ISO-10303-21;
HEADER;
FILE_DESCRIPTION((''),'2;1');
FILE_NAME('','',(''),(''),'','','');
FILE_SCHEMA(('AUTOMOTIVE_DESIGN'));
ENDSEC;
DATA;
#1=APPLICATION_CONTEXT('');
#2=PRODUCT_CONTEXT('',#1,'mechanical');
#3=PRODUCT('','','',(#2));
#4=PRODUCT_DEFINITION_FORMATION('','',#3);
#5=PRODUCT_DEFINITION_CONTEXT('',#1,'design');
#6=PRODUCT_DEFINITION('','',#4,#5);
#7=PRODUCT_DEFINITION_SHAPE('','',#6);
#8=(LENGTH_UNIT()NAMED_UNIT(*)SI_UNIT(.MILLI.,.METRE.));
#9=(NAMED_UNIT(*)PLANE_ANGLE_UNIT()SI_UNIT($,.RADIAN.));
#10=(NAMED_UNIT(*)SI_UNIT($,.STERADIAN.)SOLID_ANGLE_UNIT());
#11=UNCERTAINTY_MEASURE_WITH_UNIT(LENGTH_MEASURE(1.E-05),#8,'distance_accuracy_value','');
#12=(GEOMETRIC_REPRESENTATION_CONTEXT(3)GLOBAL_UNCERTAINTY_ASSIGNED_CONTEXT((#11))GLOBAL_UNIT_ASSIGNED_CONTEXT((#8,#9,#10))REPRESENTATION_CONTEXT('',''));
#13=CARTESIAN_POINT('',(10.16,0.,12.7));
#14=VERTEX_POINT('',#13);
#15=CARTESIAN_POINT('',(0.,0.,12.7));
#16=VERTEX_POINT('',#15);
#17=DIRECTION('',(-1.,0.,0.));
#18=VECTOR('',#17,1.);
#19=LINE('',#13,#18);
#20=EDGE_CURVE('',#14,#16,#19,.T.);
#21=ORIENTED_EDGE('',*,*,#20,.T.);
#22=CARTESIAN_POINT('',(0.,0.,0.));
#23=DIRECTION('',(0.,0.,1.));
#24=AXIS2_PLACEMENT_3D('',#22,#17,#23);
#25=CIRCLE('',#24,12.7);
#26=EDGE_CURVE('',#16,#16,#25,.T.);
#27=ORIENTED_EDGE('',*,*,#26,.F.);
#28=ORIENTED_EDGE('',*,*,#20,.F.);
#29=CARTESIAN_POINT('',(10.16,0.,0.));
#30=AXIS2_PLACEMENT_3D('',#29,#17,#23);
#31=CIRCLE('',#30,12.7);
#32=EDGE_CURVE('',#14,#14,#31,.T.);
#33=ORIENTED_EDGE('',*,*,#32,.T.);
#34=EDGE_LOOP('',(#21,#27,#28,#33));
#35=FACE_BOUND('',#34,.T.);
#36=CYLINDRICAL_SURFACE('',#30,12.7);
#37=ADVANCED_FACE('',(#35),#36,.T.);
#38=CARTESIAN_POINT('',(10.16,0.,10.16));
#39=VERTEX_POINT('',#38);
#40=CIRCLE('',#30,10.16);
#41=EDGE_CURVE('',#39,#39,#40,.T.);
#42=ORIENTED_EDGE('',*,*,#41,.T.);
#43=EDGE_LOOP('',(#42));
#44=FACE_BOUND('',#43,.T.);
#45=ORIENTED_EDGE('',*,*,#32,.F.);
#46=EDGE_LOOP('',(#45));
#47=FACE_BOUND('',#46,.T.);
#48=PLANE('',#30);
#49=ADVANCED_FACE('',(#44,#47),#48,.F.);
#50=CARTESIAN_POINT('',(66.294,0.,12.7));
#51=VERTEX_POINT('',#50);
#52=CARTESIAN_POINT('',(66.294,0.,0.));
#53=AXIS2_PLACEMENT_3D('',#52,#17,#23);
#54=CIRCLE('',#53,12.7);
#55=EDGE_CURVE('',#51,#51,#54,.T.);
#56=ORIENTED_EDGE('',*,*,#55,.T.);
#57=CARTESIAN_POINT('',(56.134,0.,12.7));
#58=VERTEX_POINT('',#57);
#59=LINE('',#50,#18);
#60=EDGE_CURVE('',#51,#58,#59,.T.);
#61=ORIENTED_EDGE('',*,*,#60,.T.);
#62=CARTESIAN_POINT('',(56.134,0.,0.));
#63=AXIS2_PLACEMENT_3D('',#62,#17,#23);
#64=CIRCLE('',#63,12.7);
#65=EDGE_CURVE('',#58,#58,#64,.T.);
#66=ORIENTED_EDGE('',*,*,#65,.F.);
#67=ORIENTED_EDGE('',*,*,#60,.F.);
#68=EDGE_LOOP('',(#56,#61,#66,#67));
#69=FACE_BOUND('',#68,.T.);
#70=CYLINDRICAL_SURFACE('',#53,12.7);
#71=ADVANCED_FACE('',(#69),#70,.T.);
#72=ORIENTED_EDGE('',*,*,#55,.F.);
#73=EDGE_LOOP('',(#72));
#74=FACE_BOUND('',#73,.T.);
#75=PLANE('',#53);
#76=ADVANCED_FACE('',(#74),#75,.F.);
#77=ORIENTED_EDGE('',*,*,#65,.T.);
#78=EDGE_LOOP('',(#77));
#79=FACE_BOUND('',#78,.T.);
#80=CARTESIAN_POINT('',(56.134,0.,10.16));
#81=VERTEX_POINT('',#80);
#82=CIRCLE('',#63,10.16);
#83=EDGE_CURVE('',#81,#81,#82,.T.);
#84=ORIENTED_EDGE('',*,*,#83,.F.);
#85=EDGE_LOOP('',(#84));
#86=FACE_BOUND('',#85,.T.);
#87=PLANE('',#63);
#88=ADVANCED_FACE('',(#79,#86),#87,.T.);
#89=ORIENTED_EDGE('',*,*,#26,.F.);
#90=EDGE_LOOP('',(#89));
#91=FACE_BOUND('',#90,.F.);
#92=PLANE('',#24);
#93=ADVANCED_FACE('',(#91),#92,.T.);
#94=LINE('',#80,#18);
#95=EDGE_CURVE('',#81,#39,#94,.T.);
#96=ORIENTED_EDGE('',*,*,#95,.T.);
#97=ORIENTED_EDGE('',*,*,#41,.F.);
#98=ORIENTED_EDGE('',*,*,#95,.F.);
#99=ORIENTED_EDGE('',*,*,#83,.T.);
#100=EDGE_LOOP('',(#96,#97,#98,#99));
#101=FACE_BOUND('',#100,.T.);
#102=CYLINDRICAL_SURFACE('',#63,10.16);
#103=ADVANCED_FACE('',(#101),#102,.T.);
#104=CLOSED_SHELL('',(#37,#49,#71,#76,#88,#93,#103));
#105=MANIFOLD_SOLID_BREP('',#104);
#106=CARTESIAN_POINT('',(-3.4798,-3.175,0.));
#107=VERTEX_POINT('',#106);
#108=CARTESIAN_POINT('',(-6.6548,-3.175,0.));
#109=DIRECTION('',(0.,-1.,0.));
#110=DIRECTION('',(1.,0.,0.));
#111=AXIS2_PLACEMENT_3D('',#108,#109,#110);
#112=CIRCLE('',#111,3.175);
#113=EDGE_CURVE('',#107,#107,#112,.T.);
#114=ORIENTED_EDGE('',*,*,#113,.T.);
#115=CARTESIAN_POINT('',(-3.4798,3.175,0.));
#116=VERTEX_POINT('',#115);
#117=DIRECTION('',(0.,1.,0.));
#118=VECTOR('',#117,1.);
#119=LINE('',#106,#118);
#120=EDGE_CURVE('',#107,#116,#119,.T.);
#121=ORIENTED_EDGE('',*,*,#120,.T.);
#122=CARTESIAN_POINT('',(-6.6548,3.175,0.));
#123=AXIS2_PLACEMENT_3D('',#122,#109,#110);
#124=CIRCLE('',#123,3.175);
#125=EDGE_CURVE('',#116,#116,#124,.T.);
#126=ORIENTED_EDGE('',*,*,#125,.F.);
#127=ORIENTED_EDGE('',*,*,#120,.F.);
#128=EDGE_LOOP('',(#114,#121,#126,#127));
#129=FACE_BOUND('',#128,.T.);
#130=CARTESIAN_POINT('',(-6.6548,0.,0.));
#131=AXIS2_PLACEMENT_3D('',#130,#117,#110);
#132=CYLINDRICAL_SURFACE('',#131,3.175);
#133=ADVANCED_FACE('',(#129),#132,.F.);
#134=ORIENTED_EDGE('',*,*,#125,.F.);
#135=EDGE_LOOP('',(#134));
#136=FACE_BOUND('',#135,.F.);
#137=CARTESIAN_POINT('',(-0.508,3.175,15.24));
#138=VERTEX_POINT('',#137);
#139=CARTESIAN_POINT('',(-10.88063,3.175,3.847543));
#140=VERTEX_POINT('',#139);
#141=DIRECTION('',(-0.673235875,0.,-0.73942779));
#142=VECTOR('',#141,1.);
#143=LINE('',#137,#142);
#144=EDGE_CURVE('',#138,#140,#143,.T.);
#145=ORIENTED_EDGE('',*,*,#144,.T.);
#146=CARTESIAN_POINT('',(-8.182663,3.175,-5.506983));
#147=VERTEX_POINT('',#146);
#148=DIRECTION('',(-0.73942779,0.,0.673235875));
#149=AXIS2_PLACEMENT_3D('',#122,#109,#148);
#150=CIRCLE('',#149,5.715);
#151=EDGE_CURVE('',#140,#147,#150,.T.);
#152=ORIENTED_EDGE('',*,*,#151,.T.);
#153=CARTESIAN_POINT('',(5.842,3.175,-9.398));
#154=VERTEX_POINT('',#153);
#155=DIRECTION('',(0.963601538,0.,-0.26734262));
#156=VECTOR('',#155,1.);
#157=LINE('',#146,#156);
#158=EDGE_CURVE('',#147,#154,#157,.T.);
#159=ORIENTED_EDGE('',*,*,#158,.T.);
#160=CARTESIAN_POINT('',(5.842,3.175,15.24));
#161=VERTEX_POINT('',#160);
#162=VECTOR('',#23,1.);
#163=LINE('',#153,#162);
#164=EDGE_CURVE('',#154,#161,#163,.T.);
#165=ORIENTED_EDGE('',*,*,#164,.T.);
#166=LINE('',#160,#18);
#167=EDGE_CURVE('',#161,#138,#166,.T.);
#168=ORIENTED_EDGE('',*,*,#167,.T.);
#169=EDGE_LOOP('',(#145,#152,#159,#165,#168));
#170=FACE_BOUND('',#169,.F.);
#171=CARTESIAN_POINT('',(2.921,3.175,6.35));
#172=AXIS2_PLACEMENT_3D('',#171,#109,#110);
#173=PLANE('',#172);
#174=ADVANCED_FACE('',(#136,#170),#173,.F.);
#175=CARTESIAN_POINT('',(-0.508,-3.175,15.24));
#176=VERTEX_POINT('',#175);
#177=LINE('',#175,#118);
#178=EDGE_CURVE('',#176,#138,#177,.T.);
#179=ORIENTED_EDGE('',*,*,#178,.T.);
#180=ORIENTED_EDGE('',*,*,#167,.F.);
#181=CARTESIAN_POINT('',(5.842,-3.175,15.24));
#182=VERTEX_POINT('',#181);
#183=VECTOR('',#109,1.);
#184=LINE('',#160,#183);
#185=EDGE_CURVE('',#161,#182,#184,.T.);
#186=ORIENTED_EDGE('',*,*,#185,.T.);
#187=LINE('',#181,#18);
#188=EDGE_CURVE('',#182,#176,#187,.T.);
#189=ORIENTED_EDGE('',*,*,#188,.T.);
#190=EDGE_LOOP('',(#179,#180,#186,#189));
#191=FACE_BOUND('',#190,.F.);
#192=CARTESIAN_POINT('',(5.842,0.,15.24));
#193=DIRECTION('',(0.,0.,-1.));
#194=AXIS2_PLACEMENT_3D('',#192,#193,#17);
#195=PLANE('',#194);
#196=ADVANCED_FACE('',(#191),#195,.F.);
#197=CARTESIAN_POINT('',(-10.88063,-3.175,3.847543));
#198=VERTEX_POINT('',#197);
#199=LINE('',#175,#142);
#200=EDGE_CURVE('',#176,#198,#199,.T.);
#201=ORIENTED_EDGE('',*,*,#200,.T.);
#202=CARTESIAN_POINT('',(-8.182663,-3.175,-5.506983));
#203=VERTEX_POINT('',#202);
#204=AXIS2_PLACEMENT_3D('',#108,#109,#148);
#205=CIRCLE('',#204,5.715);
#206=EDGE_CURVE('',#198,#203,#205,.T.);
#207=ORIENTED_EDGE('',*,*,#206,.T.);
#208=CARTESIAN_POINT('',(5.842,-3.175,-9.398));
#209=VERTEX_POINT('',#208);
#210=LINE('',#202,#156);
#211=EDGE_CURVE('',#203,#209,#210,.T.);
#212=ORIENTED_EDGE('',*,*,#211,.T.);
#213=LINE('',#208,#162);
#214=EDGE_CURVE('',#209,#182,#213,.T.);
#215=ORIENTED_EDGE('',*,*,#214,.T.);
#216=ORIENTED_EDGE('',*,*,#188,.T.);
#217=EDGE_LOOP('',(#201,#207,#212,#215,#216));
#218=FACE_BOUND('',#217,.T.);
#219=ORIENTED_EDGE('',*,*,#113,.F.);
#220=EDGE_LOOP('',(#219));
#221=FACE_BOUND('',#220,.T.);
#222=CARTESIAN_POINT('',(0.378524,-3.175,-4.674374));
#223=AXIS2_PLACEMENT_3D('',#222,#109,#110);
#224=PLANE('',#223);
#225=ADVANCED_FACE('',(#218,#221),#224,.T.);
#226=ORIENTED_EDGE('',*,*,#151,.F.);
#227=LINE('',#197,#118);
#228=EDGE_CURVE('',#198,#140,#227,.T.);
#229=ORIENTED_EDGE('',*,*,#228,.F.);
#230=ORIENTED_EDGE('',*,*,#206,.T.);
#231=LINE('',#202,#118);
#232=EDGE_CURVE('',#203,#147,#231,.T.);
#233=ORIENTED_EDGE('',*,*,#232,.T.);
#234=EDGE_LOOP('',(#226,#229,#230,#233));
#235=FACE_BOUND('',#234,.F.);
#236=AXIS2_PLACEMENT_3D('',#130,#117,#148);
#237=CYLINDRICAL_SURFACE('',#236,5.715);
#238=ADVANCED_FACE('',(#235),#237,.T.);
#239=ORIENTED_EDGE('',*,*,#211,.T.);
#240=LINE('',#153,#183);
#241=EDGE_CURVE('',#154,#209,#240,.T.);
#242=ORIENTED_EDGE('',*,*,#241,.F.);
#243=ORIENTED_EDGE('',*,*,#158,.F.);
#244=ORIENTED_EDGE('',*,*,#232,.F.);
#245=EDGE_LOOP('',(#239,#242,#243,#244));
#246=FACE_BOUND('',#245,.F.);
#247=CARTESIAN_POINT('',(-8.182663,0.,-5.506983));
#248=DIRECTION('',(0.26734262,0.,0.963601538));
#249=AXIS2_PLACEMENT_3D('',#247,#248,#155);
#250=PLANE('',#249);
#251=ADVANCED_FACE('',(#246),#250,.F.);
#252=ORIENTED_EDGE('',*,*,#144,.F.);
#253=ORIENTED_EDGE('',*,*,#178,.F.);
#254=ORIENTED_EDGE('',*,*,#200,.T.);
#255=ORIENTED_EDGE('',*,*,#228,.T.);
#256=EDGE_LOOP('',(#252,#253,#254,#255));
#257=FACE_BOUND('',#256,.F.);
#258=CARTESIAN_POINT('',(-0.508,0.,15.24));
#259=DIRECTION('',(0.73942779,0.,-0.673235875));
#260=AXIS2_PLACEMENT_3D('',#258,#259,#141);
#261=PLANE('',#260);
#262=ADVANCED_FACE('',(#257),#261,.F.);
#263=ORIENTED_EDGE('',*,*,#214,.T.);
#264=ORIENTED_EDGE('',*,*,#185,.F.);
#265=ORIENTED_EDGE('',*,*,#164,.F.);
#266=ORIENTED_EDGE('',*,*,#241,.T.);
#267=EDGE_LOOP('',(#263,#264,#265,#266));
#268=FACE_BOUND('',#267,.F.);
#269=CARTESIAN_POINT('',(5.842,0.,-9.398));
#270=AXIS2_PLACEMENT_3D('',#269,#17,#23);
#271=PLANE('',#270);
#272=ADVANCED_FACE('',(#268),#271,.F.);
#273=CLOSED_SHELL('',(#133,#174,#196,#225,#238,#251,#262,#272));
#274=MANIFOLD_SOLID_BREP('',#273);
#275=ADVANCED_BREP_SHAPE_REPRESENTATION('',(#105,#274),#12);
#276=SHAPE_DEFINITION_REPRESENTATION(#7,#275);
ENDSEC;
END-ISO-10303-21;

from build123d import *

# Parameters (mm, degrees)
F0_W     = 5.842
F0_H     = 12.7
F0_R     = 3.175
F1_DEPTH = 3.175
F2_DEPTH = 3.175


# Not quite as in the source:
# - the program builds the solid bodies; features that only make, move or delete a surface that nothing else refers to are left out


with BuildPart() as f1:
    # F0 (on Front) → F1 (new body)
    with BuildSketch(Plane.XZ):
        with Locations((2.921, 6.35)):
            Rectangle(F0_W, F0_H)
        with BuildLine():
            Line((-0.9398, 0), (0, 0))
            Line((0, 0), (0, 12.7))
            Line((0, 12.7), (5.842, 12.7))
            Line((5.842, 12.7), (5.842, 15.24))
            Line((5.842, 15.24), (-0.508, 15.24))
            Line((-0.508, 15.24), (-10.8806298187, 3.8475430269))
            ThreePointArc((-10.8806298187, 3.8475430269), (-4.5919612295, 5.3297205562), (-0.9398, 0))
        make_face()
        with BuildLine():
            Line((5.842, 0), (0, 0))
            Line((0, 0), (-0.9398, 0))
            ThreePointArc((-0.9398, 0), (-3.1957909266, -4.5493385486), (-8.1826630726, -5.5069827884))
            Line((-8.1826630726, -5.5069827884), (5.842, -9.398))
            Line((5.842, -9.398), (5.842, 0))
        make_face()
        with BuildLine():
            ThreePointArc((-8.1826630726, -5.5069827884), (-3.1957909266, -4.5493385486), (-0.9398, 0))
            ThreePointArc((-0.9398, 0), (-4.5919612295, 5.3297205562), (-10.8806298187, 3.8475430269))
            ThreePointArc((-10.8806298187, 3.8475430269), (-12.1459778134, -1.5837270034), (-8.1826630726, -5.5069827884))
        make_face()
        with Locations((-6.6548, 0)):
            Circle(F0_R, mode=Mode.SUBTRACT)
    extrude(amount=-F1_DEPTH)

    # F0 (on Front) → F2 (join)
    with BuildSketch(Plane.XZ):
        with BuildLine():
            Line((5.842, 0), (0, 0))
            Line((0, 0), (-0.9398, 0))
            ThreePointArc((-0.9398, 0), (-3.1957909266, -4.5493385486), (-8.1826630726, -5.5069827884))
            Line((-8.1826630726, -5.5069827884), (5.842, -9.398))
            Line((5.842, -9.398), (5.842, 0))
        make_face()
        with Locations((2.921, 6.35)):
            Rectangle(F0_W, F0_H)
        with BuildLine():
            Line((-0.9398, 0), (0, 0))
            Line((0, 0), (0, 12.7))
            Line((0, 12.7), (5.842, 12.7))
            Line((5.842, 12.7), (5.842, 15.24))
            Line((5.842, 15.24), (-0.508, 15.24))
            Line((-0.508, 15.24), (-10.8806298187, 3.8475430269))
            ThreePointArc((-10.8806298187, 3.8475430269), (-4.5919612295, 5.3297205562), (-0.9398, 0))
        make_face()
        with BuildLine():
            ThreePointArc((-8.1826630726, -5.5069827884), (-3.1957909266, -4.5493385486), (-0.9398, 0))
            ThreePointArc((-0.9398, 0), (-4.5919612295, 5.3297205562), (-10.8806298187, 3.8475430269))
            ThreePointArc((-10.8806298187, 3.8475430269), (-12.1459778134, -1.5837270034), (-8.1826630726, -5.5069827884))
        make_face()
        with Locations((-6.6548, 0)):
            Circle(F0_R, mode=Mode.SUBTRACT)
    extrude(amount=F2_DEPTH)


with BuildPart() as f3:
    # F0 (on Front) → F3 (revolve)
    with BuildSketch(Plane.XZ):
        with Locations((2.921, 6.35)):
            Rectangle(F0_W, F0_H)
        Polygon((5.842, 12.7), (5.842, 0), (66.294, 0), (66.294, 12.7), (56.134, 12.7), (56.134, 10.16), (10.16, 10.16), (10.16, 12.7), align=None)
    revolve(axis=Axis((33.147, 0, 0), (-1, 0, 0)))


solid = Compound([f1.part, f3.part])
